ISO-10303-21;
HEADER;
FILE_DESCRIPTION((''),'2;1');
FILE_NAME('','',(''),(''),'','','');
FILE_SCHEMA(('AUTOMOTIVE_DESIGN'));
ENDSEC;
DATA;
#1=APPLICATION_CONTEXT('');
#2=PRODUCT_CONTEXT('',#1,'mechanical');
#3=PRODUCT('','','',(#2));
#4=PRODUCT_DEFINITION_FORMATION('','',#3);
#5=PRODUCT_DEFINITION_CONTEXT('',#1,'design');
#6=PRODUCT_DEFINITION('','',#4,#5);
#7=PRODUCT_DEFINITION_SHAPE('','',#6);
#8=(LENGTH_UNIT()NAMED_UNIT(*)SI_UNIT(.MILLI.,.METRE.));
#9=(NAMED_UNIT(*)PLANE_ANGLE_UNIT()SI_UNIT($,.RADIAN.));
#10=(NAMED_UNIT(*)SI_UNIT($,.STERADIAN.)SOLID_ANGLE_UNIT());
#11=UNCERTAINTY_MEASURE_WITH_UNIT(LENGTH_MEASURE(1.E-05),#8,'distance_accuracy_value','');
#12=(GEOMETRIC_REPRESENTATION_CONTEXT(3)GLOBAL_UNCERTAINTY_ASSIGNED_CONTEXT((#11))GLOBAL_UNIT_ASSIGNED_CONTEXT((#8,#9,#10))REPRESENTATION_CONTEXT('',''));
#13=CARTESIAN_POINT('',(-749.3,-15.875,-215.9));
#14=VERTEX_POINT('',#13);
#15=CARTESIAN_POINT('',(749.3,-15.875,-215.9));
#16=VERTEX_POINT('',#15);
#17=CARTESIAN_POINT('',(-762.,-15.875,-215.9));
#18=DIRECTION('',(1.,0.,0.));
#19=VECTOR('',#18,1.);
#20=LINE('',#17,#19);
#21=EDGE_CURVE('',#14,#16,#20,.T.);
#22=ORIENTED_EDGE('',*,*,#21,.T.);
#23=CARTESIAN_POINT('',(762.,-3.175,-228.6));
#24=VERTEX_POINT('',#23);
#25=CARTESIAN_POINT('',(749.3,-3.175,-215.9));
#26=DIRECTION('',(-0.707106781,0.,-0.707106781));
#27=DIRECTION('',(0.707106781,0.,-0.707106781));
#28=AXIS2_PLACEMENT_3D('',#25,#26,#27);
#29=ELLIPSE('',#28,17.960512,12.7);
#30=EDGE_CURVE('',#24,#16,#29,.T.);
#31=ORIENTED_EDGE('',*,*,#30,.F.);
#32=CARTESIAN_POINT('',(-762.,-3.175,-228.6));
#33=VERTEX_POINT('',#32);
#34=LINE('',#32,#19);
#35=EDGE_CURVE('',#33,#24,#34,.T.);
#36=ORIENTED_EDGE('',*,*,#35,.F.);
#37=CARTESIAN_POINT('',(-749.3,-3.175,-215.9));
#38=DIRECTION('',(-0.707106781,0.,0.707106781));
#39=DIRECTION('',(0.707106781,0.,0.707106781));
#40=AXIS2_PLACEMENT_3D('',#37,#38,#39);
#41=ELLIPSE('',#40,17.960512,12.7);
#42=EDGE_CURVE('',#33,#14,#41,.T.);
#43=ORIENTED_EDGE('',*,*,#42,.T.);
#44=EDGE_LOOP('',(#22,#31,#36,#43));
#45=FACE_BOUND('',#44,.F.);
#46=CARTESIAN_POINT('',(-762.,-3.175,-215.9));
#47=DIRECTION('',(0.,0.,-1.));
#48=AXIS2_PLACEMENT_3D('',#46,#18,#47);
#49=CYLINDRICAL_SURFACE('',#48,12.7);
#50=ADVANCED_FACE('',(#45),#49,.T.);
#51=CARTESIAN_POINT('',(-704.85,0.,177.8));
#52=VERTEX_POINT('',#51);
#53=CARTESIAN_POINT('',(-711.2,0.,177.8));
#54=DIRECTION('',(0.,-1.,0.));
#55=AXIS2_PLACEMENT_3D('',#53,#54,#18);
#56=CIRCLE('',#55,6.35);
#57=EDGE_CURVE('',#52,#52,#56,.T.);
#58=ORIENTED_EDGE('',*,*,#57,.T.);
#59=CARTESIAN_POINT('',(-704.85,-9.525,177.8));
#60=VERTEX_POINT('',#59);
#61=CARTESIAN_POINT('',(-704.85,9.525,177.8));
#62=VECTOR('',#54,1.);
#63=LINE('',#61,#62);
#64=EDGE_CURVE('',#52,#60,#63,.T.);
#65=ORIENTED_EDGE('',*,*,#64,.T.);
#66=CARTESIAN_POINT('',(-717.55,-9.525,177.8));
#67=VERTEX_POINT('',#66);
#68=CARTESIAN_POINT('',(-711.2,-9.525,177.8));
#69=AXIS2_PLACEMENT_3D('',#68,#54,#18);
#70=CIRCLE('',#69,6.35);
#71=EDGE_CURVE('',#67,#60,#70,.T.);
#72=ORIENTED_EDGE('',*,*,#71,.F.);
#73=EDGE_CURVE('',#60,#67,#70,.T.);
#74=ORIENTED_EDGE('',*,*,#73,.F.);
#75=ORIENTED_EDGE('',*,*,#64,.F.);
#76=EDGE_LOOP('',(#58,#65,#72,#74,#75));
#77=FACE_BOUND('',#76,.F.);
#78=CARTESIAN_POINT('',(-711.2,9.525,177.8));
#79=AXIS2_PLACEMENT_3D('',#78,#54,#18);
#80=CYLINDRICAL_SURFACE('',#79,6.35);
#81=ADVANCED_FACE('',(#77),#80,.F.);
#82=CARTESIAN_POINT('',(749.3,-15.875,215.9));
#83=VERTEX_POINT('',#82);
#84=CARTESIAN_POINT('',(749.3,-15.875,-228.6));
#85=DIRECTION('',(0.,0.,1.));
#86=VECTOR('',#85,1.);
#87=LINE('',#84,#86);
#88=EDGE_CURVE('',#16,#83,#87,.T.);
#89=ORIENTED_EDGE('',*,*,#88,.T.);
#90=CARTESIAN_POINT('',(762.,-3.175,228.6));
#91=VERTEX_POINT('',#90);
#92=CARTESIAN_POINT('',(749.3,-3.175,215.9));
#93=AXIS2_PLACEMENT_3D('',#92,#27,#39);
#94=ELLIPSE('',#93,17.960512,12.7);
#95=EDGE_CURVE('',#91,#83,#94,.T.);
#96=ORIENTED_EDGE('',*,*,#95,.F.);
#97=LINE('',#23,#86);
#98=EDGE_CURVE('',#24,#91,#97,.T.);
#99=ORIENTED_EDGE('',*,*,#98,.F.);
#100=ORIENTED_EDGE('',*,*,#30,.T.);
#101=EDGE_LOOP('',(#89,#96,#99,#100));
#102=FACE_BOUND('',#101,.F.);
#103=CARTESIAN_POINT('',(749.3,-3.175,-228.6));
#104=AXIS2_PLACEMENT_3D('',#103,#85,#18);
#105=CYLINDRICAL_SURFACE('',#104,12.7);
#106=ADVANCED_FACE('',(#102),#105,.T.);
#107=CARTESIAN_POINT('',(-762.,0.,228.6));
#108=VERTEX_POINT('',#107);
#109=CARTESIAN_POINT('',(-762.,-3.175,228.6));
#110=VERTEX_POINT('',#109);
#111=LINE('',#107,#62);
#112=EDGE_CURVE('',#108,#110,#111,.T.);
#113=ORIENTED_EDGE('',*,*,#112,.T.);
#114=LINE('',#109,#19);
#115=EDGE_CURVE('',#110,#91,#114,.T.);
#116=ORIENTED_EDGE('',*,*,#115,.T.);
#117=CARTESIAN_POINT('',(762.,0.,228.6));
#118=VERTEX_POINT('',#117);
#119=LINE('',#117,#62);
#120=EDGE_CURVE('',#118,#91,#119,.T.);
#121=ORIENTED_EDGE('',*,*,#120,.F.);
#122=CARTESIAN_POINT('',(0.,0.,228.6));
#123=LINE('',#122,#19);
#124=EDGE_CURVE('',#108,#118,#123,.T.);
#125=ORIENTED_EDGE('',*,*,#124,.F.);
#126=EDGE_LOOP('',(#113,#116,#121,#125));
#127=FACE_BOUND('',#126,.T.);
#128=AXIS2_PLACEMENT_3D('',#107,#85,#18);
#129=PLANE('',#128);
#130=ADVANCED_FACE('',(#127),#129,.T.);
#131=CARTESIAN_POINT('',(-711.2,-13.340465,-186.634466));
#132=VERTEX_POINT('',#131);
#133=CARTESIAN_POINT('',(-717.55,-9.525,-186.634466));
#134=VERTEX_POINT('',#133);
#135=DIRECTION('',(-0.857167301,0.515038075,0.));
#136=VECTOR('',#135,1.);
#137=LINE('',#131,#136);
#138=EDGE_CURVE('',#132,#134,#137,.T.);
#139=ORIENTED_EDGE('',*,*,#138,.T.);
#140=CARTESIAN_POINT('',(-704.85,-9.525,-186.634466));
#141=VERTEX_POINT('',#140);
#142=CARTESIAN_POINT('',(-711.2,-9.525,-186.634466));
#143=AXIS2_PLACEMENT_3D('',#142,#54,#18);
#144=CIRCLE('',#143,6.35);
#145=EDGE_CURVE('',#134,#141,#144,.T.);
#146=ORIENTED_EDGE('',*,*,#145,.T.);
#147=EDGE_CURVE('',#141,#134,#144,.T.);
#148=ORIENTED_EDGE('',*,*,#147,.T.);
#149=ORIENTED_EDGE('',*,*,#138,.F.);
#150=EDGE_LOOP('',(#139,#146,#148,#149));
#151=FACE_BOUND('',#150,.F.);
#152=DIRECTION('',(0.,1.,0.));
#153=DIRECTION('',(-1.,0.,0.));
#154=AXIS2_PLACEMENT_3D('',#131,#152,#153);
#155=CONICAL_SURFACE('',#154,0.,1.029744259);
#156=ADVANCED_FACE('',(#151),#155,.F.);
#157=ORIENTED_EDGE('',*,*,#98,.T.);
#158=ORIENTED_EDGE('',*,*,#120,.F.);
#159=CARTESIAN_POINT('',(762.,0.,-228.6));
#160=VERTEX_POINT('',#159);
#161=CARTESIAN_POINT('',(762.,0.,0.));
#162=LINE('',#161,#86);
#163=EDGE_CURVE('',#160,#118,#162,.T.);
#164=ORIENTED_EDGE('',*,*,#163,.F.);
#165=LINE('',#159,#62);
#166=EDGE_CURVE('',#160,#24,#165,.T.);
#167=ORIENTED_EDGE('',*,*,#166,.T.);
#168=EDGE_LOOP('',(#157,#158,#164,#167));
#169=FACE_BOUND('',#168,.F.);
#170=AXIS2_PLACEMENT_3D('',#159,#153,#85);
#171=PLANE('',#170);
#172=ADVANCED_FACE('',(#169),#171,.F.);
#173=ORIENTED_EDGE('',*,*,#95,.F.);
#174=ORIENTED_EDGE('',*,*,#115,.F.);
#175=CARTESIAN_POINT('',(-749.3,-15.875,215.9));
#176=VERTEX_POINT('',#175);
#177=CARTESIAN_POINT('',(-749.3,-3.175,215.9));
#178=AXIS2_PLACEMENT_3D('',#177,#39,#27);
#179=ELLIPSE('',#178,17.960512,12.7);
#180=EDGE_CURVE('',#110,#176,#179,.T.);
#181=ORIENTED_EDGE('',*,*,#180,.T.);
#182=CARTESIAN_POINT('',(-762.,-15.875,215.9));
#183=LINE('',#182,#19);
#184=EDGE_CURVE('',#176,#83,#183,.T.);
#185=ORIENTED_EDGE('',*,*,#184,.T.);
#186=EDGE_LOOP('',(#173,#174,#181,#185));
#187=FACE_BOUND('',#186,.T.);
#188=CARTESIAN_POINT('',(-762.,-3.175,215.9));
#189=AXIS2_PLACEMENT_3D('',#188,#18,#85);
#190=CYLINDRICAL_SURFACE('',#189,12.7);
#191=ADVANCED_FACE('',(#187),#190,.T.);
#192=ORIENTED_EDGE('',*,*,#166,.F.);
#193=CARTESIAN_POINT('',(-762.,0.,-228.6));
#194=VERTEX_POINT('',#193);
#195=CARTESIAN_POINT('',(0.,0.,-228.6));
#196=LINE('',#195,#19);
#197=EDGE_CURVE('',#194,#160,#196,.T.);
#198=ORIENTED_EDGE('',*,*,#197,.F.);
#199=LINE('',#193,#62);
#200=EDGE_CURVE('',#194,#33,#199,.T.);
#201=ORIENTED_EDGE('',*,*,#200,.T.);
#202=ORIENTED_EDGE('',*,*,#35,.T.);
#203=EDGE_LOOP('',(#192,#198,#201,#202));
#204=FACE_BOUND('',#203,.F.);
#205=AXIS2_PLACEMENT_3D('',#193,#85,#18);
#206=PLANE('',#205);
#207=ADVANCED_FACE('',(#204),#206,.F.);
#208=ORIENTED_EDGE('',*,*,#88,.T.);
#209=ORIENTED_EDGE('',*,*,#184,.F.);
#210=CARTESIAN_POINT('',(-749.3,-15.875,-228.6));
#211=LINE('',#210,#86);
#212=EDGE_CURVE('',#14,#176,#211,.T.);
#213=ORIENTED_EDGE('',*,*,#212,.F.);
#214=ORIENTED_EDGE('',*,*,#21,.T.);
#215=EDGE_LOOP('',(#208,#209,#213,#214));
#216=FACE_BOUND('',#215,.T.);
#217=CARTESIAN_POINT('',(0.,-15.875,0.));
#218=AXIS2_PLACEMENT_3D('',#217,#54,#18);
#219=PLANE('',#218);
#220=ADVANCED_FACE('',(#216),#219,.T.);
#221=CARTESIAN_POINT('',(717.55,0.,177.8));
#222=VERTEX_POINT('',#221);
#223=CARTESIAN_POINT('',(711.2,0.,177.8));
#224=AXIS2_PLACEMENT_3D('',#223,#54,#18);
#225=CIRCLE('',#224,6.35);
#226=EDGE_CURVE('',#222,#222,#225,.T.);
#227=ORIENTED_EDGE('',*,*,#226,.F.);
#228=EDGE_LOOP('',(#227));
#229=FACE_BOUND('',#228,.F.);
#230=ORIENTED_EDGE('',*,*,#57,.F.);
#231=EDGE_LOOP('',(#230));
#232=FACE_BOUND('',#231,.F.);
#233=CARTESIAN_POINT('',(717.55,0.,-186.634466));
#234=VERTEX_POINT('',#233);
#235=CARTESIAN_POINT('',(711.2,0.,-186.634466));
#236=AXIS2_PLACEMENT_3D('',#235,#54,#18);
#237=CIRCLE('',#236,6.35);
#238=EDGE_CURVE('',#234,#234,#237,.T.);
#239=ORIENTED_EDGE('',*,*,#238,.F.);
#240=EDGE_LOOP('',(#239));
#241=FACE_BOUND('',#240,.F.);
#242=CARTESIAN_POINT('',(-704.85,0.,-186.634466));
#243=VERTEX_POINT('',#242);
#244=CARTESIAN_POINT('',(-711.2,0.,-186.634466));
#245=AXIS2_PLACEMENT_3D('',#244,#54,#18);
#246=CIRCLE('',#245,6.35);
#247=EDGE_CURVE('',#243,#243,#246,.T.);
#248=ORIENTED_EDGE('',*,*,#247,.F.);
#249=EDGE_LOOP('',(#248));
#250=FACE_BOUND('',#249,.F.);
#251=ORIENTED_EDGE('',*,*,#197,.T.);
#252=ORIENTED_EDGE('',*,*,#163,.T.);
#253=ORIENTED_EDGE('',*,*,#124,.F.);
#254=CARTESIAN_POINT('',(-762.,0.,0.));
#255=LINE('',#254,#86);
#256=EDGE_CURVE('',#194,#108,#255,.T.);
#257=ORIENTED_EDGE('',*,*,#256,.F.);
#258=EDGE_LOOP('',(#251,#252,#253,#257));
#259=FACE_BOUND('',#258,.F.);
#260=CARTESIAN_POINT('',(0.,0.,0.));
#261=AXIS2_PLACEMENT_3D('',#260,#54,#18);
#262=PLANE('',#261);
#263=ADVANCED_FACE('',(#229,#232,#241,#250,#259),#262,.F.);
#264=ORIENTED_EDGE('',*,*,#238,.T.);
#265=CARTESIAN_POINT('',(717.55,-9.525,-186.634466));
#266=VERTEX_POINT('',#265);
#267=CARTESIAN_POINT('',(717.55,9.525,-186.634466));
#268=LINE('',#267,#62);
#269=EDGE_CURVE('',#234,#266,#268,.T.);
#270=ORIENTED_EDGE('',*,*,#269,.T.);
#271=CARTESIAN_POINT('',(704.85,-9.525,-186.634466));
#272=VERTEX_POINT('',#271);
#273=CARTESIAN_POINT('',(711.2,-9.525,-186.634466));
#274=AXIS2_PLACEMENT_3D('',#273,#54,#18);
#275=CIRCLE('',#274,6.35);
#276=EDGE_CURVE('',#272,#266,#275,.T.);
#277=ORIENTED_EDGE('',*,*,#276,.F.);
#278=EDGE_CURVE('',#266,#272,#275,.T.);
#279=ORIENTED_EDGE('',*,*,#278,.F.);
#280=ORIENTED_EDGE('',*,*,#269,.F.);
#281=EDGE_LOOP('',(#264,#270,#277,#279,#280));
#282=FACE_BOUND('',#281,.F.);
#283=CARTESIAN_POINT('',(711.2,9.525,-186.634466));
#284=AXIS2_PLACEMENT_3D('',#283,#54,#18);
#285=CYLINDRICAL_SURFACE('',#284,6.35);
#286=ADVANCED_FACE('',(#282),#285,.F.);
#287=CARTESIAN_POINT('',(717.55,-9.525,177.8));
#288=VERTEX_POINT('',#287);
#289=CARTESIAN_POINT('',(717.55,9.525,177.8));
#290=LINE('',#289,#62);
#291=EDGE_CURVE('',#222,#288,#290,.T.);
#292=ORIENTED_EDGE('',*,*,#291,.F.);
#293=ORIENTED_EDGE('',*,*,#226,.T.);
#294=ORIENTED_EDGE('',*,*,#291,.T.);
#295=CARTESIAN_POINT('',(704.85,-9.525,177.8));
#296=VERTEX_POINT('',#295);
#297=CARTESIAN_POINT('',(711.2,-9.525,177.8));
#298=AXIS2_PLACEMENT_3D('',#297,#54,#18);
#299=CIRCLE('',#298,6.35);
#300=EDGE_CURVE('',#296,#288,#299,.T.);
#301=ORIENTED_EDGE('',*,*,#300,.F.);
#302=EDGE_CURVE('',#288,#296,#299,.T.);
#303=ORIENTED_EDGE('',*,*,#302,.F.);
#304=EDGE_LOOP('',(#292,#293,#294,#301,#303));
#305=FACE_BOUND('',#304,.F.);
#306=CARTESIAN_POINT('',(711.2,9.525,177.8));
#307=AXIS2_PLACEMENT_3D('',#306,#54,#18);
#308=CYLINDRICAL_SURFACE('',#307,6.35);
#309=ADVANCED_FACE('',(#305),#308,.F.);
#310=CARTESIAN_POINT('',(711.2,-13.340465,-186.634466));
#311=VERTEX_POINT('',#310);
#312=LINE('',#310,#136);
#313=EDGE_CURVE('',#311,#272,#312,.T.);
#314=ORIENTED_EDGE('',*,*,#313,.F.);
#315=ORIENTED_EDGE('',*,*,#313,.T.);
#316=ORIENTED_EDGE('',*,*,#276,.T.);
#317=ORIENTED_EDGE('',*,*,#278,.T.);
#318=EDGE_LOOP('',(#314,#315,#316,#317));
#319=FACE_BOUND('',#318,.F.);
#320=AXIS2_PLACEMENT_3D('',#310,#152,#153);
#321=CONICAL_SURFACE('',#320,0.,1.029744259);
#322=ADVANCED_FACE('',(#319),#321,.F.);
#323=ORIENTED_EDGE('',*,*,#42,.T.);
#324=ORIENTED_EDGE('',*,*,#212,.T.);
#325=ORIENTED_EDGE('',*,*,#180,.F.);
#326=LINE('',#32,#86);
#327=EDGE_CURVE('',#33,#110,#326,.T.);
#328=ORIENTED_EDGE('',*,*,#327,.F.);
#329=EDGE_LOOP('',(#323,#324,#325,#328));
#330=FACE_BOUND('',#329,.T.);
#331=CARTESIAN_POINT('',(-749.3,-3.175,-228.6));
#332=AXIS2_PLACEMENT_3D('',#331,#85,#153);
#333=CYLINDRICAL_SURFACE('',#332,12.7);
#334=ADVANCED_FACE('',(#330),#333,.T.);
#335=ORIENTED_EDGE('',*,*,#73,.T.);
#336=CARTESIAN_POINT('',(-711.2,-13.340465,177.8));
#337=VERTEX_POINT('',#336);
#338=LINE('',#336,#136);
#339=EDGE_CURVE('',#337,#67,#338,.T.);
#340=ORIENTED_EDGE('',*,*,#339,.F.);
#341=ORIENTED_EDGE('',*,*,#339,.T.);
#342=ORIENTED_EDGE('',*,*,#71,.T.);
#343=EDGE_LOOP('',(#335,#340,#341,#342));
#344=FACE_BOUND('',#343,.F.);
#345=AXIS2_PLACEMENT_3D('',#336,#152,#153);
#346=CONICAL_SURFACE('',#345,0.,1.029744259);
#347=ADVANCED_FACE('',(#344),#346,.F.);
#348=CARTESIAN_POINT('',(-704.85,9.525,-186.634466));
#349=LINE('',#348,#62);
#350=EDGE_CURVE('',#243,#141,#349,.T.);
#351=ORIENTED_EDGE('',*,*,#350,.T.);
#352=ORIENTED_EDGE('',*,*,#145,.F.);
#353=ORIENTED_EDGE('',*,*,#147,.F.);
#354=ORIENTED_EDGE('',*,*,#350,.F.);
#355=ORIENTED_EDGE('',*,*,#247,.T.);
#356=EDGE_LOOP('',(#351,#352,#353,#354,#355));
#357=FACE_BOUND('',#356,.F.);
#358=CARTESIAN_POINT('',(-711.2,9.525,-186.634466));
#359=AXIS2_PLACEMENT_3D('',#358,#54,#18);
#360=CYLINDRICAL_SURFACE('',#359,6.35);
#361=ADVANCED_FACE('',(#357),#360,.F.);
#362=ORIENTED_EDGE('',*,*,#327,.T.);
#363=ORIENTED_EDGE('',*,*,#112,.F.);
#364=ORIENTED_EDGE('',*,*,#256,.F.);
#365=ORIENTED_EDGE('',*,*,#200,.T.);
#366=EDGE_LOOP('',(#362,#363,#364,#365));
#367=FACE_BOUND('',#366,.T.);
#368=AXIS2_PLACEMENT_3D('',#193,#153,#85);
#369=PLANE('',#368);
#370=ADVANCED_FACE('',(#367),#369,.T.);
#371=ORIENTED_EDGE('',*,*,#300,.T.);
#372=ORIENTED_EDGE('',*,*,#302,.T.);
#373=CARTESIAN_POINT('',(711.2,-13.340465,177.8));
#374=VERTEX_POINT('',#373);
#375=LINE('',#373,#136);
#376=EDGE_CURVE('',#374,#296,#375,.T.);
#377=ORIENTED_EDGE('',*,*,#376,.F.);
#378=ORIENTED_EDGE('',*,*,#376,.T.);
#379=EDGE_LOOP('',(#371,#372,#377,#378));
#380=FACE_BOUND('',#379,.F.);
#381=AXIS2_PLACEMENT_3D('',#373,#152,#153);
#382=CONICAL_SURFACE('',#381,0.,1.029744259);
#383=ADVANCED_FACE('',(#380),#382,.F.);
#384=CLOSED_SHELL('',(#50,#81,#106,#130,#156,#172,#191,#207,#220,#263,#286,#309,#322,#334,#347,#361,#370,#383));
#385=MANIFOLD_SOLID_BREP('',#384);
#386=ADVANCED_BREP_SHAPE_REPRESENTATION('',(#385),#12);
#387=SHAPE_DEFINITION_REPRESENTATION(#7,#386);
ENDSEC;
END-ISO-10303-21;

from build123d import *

# Parameters (mm, degrees)
F0_W     = 1524
F0_H     = 457.2
F1_DEPTH = 15.875
F2_R     = 12.7
F4_D     = 12.7
F4_DEPTH = 9.525
F4_TIP   = 3.8154649308


# Not quite as in the source:
# - a length typed as a fraction of an inch, garbled in the dataset ("3 / 203.2 mm" for 3/8 in), is restored


with BuildPart() as f1:
    # F0 (on Front) → F1 (new body)
    with BuildSketch(Plane.XZ):
        Rectangle(F0_W, F0_H)
    extrude(amount=F1_DEPTH)

    # F2
    f2_edges = [f1.edges().sort_by_distance(p)[0] for p in [
        (0, -15.875, 228.6),
        (-762, -15.875, 0),
        (0, -15.875, -228.6),
        (762, -15.875, 0),
    ]]
    fillet(f2_edges, radius=F2_R)

    # F4
    with Locations(Plane(origin=(0, 0, 0), x_dir=(-1, 0, 0), z_dir=(0, 1, 0))):
        with Locations((-711.2, 177.8), (-711.2, -186.6344660521), (711.2, -186.6344660521), (711.2, 177.8)):
            Hole(F4_D / 2, depth=F4_DEPTH)
            with Locations((0, 0, -(F4_DEPTH + F4_TIP / 2))):  # 118° drill point
                Cone(0, F4_D / 2, F4_TIP, mode=Mode.SUBTRACT)


solid = f1.part
